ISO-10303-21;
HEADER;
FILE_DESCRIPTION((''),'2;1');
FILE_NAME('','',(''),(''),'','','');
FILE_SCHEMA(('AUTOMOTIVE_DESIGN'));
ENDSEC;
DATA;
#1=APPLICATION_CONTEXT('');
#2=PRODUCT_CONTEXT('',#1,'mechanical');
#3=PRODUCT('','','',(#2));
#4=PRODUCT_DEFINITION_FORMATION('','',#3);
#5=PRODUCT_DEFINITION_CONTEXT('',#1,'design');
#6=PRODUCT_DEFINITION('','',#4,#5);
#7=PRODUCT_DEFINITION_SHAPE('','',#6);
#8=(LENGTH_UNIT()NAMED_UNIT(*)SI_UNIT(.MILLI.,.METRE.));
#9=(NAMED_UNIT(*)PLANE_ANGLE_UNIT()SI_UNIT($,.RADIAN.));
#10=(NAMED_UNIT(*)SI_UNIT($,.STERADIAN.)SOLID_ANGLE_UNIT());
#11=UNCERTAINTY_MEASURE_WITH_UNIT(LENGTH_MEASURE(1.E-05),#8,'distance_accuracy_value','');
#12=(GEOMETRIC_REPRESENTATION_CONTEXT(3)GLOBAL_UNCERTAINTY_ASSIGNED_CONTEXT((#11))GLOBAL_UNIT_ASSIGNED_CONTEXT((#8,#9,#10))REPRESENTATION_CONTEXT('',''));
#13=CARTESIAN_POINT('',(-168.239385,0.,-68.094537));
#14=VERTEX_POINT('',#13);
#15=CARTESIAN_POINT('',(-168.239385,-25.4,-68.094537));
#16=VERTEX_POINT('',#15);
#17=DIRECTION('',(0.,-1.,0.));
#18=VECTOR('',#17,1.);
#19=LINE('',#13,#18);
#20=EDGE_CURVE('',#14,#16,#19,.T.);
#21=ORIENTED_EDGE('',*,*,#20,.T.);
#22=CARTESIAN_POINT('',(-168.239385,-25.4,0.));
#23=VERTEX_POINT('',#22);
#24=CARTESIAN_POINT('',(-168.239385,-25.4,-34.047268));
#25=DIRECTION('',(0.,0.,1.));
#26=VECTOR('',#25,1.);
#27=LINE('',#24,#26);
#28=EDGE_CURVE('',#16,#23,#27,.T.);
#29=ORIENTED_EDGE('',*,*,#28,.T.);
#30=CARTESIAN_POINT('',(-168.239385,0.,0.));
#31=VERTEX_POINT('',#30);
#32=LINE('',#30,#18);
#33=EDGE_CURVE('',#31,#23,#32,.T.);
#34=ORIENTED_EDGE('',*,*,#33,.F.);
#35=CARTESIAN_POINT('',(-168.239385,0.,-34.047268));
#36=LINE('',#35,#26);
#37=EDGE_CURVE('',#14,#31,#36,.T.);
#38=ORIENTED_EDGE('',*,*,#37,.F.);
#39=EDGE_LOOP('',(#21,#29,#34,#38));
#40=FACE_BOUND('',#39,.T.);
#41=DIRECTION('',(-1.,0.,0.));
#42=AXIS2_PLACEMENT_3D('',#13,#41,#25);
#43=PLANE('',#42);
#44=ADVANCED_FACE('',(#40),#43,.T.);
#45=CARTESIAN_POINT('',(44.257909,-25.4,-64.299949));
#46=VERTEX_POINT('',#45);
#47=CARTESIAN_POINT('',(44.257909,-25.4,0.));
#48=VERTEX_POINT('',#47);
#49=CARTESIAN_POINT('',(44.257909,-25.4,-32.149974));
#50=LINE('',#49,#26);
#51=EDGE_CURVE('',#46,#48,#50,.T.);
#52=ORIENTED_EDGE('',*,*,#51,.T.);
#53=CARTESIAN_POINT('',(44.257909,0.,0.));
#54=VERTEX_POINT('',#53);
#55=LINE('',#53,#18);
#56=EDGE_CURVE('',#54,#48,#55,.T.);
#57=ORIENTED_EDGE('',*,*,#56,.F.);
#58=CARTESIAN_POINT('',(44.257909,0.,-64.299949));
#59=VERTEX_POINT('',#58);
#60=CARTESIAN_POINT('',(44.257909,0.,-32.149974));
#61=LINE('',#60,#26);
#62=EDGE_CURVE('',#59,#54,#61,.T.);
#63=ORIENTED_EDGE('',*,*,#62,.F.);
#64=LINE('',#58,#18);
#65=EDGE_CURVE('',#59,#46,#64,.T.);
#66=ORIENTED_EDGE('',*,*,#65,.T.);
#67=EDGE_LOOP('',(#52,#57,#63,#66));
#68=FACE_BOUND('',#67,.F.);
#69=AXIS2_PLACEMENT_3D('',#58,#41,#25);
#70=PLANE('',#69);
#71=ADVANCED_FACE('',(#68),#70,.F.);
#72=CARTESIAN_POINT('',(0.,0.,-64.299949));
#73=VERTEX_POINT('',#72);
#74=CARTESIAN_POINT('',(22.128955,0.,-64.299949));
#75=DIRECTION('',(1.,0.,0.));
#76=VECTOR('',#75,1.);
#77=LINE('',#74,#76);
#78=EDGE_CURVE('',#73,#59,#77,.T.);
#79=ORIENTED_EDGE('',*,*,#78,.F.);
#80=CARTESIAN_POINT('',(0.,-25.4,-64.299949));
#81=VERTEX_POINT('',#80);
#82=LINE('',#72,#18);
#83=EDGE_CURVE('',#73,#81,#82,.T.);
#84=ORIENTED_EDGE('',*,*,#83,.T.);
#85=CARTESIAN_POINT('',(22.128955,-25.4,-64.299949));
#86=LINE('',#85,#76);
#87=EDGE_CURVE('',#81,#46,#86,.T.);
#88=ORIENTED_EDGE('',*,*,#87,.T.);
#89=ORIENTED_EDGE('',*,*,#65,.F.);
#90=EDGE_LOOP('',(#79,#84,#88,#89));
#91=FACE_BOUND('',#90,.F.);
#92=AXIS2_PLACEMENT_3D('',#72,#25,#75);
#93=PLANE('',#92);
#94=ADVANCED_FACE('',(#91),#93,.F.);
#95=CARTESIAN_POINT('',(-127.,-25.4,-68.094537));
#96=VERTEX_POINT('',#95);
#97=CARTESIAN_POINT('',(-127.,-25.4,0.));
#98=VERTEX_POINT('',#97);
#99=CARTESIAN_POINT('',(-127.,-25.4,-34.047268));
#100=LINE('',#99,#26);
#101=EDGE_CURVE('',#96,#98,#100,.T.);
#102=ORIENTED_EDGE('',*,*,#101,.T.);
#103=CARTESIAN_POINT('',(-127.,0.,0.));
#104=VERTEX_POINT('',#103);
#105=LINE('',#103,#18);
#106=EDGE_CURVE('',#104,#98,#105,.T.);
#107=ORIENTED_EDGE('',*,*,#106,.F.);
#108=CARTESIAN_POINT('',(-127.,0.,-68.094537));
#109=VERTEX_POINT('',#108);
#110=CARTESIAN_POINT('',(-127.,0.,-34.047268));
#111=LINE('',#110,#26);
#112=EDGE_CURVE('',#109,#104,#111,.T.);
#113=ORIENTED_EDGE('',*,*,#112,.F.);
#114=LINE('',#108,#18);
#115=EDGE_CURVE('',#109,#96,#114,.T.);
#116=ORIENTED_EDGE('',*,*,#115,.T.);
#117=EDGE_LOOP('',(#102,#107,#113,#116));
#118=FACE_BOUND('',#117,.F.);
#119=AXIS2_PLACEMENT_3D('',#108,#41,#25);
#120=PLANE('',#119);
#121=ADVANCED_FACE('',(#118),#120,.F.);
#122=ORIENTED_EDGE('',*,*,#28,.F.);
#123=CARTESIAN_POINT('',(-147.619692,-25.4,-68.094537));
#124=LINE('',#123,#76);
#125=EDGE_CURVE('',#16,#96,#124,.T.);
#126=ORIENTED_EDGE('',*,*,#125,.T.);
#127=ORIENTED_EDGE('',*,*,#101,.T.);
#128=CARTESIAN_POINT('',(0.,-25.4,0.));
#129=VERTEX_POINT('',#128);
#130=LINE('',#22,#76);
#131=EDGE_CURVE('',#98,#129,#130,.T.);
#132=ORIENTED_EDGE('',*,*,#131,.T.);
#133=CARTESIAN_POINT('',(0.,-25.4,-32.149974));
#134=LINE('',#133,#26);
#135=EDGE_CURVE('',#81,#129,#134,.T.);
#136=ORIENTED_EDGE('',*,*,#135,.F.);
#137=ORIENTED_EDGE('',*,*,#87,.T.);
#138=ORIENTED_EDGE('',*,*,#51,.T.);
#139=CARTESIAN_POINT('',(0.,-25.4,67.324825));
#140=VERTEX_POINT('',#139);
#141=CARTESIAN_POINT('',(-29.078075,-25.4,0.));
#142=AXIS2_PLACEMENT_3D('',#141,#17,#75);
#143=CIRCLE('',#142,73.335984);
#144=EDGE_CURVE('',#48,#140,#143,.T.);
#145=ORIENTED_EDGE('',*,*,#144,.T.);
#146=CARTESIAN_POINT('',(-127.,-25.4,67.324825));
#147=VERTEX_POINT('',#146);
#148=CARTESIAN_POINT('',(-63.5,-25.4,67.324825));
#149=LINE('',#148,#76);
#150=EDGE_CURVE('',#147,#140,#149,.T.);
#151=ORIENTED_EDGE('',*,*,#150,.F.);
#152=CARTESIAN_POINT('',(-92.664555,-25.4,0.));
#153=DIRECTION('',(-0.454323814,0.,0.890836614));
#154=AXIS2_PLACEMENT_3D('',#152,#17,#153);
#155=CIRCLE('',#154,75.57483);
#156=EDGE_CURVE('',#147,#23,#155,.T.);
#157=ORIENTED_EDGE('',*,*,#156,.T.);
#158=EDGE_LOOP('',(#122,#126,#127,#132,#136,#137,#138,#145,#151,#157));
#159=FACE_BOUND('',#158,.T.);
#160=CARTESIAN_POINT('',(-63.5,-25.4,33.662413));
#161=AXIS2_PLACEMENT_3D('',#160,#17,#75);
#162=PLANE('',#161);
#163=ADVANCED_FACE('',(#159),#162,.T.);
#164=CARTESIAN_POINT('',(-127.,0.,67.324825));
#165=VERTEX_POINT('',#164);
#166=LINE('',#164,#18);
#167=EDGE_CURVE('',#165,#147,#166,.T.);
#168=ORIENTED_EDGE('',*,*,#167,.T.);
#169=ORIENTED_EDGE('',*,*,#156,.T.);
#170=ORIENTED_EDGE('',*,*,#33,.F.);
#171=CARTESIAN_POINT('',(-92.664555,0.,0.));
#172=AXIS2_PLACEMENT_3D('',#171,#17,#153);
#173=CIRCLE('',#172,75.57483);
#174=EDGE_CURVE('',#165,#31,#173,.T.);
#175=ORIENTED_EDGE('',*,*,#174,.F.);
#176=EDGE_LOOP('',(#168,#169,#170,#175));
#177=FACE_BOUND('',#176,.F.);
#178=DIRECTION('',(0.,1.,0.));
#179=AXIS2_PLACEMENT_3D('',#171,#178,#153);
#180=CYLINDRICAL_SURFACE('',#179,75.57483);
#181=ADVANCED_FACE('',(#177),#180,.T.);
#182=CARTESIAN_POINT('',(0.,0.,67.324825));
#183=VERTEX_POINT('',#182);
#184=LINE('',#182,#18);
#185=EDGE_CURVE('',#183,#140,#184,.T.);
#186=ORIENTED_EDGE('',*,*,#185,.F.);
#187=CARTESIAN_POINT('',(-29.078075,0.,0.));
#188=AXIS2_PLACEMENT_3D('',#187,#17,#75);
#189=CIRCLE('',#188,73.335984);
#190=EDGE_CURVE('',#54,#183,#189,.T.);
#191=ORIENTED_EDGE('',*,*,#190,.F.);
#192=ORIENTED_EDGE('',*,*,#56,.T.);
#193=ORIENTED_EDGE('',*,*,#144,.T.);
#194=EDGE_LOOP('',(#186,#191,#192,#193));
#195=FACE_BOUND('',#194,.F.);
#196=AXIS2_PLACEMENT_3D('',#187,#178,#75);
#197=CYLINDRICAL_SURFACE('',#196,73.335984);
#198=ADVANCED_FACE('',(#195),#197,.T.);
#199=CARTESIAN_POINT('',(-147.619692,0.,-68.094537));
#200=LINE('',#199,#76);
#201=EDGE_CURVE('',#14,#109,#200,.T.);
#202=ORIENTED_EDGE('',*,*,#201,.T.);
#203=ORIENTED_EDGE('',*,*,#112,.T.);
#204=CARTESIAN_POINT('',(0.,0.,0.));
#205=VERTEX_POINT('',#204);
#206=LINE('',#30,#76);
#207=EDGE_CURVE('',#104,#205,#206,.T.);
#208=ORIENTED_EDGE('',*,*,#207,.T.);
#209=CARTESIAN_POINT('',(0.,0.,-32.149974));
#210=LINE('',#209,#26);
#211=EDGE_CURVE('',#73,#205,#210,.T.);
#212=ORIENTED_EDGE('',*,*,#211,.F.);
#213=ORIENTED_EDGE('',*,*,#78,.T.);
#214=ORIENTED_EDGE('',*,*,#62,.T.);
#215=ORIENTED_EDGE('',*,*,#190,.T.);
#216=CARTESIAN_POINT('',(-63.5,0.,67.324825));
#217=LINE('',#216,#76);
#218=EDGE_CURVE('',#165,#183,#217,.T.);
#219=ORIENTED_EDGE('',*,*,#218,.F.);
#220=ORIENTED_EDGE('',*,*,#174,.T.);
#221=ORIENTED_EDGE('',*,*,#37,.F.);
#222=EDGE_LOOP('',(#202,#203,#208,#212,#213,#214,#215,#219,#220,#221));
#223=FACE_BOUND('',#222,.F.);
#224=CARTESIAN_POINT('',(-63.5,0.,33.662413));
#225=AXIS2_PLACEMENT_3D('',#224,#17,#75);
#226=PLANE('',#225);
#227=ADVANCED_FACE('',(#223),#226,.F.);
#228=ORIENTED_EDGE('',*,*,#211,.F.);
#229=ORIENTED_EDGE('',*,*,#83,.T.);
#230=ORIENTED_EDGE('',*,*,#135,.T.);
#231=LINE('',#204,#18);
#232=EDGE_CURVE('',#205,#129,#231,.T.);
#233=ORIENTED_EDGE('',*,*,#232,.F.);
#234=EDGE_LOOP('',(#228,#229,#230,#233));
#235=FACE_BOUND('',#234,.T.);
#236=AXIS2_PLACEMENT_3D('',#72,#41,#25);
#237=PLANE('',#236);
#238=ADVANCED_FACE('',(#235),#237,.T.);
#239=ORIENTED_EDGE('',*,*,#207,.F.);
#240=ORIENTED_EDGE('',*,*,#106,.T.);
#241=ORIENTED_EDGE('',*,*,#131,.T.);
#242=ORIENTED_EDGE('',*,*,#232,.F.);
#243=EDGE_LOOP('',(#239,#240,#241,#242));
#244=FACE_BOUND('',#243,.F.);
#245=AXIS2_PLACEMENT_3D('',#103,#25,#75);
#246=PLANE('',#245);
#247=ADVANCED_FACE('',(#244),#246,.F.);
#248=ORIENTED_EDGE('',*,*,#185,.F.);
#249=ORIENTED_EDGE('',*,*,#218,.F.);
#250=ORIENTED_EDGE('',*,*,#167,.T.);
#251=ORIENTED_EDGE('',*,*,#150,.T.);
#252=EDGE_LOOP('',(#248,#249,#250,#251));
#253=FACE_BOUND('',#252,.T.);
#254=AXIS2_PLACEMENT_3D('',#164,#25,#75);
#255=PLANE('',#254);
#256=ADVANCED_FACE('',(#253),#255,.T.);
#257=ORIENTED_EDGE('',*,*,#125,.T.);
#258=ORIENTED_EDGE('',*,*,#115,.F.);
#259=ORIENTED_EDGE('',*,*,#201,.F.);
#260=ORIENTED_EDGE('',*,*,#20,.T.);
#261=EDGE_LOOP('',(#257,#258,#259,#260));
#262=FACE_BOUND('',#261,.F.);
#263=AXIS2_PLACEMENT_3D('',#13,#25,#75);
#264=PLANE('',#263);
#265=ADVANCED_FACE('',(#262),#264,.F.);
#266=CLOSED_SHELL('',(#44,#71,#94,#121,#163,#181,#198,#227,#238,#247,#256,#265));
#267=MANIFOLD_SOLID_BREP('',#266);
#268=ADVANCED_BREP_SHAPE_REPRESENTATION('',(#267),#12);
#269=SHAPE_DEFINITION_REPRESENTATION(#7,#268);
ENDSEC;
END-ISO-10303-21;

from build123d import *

# Parameters (mm, degrees)
F0_W     = 127
F0_H     = 67.3248254269
F0_W_2   = 44.2579090595
F0_H_2   = 64.2999485135
F0_W_3   = 41.2393848896
F0_H_3   = 68.0945366621
F1_DEPTH = 25.4


with BuildPart() as f1:
    # F0 (on Front) → F1 (new body)
    with BuildSketch(Plane.XZ):
        with Locations((-63.5, 33.6624127134)):
            Rectangle(F0_W, F0_H)
        with BuildLine():
            Line((0, 67.3248254269), (0, 0))
            Line((0, 0), (44.2579090595, 0))
            ThreePointArc((44.2579090595, 0), (32.2025736705, 40.2845957938), (0, 67.3248254269))
        make_face()
        with Locations((22.1289545298, -32.1499742568)):
            Rectangle(F0_W_2, F0_H_2)
        with BuildLine():
            Line((-168.2393848896, 0), (-127, 0))
            Line((-127, 0), (-127, 67.3248254269))
            ThreePointArc((-127, 67.3248254269), (-157.1100758974, 39.4756855065), (-168.2393848896, 0))
        make_face()
        with Locations((-147.6196924448, -34.0472683311)):
            Rectangle(F0_W_3, F0_H_3)
    extrude(amount=F1_DEPTH)


solid = f1.part
